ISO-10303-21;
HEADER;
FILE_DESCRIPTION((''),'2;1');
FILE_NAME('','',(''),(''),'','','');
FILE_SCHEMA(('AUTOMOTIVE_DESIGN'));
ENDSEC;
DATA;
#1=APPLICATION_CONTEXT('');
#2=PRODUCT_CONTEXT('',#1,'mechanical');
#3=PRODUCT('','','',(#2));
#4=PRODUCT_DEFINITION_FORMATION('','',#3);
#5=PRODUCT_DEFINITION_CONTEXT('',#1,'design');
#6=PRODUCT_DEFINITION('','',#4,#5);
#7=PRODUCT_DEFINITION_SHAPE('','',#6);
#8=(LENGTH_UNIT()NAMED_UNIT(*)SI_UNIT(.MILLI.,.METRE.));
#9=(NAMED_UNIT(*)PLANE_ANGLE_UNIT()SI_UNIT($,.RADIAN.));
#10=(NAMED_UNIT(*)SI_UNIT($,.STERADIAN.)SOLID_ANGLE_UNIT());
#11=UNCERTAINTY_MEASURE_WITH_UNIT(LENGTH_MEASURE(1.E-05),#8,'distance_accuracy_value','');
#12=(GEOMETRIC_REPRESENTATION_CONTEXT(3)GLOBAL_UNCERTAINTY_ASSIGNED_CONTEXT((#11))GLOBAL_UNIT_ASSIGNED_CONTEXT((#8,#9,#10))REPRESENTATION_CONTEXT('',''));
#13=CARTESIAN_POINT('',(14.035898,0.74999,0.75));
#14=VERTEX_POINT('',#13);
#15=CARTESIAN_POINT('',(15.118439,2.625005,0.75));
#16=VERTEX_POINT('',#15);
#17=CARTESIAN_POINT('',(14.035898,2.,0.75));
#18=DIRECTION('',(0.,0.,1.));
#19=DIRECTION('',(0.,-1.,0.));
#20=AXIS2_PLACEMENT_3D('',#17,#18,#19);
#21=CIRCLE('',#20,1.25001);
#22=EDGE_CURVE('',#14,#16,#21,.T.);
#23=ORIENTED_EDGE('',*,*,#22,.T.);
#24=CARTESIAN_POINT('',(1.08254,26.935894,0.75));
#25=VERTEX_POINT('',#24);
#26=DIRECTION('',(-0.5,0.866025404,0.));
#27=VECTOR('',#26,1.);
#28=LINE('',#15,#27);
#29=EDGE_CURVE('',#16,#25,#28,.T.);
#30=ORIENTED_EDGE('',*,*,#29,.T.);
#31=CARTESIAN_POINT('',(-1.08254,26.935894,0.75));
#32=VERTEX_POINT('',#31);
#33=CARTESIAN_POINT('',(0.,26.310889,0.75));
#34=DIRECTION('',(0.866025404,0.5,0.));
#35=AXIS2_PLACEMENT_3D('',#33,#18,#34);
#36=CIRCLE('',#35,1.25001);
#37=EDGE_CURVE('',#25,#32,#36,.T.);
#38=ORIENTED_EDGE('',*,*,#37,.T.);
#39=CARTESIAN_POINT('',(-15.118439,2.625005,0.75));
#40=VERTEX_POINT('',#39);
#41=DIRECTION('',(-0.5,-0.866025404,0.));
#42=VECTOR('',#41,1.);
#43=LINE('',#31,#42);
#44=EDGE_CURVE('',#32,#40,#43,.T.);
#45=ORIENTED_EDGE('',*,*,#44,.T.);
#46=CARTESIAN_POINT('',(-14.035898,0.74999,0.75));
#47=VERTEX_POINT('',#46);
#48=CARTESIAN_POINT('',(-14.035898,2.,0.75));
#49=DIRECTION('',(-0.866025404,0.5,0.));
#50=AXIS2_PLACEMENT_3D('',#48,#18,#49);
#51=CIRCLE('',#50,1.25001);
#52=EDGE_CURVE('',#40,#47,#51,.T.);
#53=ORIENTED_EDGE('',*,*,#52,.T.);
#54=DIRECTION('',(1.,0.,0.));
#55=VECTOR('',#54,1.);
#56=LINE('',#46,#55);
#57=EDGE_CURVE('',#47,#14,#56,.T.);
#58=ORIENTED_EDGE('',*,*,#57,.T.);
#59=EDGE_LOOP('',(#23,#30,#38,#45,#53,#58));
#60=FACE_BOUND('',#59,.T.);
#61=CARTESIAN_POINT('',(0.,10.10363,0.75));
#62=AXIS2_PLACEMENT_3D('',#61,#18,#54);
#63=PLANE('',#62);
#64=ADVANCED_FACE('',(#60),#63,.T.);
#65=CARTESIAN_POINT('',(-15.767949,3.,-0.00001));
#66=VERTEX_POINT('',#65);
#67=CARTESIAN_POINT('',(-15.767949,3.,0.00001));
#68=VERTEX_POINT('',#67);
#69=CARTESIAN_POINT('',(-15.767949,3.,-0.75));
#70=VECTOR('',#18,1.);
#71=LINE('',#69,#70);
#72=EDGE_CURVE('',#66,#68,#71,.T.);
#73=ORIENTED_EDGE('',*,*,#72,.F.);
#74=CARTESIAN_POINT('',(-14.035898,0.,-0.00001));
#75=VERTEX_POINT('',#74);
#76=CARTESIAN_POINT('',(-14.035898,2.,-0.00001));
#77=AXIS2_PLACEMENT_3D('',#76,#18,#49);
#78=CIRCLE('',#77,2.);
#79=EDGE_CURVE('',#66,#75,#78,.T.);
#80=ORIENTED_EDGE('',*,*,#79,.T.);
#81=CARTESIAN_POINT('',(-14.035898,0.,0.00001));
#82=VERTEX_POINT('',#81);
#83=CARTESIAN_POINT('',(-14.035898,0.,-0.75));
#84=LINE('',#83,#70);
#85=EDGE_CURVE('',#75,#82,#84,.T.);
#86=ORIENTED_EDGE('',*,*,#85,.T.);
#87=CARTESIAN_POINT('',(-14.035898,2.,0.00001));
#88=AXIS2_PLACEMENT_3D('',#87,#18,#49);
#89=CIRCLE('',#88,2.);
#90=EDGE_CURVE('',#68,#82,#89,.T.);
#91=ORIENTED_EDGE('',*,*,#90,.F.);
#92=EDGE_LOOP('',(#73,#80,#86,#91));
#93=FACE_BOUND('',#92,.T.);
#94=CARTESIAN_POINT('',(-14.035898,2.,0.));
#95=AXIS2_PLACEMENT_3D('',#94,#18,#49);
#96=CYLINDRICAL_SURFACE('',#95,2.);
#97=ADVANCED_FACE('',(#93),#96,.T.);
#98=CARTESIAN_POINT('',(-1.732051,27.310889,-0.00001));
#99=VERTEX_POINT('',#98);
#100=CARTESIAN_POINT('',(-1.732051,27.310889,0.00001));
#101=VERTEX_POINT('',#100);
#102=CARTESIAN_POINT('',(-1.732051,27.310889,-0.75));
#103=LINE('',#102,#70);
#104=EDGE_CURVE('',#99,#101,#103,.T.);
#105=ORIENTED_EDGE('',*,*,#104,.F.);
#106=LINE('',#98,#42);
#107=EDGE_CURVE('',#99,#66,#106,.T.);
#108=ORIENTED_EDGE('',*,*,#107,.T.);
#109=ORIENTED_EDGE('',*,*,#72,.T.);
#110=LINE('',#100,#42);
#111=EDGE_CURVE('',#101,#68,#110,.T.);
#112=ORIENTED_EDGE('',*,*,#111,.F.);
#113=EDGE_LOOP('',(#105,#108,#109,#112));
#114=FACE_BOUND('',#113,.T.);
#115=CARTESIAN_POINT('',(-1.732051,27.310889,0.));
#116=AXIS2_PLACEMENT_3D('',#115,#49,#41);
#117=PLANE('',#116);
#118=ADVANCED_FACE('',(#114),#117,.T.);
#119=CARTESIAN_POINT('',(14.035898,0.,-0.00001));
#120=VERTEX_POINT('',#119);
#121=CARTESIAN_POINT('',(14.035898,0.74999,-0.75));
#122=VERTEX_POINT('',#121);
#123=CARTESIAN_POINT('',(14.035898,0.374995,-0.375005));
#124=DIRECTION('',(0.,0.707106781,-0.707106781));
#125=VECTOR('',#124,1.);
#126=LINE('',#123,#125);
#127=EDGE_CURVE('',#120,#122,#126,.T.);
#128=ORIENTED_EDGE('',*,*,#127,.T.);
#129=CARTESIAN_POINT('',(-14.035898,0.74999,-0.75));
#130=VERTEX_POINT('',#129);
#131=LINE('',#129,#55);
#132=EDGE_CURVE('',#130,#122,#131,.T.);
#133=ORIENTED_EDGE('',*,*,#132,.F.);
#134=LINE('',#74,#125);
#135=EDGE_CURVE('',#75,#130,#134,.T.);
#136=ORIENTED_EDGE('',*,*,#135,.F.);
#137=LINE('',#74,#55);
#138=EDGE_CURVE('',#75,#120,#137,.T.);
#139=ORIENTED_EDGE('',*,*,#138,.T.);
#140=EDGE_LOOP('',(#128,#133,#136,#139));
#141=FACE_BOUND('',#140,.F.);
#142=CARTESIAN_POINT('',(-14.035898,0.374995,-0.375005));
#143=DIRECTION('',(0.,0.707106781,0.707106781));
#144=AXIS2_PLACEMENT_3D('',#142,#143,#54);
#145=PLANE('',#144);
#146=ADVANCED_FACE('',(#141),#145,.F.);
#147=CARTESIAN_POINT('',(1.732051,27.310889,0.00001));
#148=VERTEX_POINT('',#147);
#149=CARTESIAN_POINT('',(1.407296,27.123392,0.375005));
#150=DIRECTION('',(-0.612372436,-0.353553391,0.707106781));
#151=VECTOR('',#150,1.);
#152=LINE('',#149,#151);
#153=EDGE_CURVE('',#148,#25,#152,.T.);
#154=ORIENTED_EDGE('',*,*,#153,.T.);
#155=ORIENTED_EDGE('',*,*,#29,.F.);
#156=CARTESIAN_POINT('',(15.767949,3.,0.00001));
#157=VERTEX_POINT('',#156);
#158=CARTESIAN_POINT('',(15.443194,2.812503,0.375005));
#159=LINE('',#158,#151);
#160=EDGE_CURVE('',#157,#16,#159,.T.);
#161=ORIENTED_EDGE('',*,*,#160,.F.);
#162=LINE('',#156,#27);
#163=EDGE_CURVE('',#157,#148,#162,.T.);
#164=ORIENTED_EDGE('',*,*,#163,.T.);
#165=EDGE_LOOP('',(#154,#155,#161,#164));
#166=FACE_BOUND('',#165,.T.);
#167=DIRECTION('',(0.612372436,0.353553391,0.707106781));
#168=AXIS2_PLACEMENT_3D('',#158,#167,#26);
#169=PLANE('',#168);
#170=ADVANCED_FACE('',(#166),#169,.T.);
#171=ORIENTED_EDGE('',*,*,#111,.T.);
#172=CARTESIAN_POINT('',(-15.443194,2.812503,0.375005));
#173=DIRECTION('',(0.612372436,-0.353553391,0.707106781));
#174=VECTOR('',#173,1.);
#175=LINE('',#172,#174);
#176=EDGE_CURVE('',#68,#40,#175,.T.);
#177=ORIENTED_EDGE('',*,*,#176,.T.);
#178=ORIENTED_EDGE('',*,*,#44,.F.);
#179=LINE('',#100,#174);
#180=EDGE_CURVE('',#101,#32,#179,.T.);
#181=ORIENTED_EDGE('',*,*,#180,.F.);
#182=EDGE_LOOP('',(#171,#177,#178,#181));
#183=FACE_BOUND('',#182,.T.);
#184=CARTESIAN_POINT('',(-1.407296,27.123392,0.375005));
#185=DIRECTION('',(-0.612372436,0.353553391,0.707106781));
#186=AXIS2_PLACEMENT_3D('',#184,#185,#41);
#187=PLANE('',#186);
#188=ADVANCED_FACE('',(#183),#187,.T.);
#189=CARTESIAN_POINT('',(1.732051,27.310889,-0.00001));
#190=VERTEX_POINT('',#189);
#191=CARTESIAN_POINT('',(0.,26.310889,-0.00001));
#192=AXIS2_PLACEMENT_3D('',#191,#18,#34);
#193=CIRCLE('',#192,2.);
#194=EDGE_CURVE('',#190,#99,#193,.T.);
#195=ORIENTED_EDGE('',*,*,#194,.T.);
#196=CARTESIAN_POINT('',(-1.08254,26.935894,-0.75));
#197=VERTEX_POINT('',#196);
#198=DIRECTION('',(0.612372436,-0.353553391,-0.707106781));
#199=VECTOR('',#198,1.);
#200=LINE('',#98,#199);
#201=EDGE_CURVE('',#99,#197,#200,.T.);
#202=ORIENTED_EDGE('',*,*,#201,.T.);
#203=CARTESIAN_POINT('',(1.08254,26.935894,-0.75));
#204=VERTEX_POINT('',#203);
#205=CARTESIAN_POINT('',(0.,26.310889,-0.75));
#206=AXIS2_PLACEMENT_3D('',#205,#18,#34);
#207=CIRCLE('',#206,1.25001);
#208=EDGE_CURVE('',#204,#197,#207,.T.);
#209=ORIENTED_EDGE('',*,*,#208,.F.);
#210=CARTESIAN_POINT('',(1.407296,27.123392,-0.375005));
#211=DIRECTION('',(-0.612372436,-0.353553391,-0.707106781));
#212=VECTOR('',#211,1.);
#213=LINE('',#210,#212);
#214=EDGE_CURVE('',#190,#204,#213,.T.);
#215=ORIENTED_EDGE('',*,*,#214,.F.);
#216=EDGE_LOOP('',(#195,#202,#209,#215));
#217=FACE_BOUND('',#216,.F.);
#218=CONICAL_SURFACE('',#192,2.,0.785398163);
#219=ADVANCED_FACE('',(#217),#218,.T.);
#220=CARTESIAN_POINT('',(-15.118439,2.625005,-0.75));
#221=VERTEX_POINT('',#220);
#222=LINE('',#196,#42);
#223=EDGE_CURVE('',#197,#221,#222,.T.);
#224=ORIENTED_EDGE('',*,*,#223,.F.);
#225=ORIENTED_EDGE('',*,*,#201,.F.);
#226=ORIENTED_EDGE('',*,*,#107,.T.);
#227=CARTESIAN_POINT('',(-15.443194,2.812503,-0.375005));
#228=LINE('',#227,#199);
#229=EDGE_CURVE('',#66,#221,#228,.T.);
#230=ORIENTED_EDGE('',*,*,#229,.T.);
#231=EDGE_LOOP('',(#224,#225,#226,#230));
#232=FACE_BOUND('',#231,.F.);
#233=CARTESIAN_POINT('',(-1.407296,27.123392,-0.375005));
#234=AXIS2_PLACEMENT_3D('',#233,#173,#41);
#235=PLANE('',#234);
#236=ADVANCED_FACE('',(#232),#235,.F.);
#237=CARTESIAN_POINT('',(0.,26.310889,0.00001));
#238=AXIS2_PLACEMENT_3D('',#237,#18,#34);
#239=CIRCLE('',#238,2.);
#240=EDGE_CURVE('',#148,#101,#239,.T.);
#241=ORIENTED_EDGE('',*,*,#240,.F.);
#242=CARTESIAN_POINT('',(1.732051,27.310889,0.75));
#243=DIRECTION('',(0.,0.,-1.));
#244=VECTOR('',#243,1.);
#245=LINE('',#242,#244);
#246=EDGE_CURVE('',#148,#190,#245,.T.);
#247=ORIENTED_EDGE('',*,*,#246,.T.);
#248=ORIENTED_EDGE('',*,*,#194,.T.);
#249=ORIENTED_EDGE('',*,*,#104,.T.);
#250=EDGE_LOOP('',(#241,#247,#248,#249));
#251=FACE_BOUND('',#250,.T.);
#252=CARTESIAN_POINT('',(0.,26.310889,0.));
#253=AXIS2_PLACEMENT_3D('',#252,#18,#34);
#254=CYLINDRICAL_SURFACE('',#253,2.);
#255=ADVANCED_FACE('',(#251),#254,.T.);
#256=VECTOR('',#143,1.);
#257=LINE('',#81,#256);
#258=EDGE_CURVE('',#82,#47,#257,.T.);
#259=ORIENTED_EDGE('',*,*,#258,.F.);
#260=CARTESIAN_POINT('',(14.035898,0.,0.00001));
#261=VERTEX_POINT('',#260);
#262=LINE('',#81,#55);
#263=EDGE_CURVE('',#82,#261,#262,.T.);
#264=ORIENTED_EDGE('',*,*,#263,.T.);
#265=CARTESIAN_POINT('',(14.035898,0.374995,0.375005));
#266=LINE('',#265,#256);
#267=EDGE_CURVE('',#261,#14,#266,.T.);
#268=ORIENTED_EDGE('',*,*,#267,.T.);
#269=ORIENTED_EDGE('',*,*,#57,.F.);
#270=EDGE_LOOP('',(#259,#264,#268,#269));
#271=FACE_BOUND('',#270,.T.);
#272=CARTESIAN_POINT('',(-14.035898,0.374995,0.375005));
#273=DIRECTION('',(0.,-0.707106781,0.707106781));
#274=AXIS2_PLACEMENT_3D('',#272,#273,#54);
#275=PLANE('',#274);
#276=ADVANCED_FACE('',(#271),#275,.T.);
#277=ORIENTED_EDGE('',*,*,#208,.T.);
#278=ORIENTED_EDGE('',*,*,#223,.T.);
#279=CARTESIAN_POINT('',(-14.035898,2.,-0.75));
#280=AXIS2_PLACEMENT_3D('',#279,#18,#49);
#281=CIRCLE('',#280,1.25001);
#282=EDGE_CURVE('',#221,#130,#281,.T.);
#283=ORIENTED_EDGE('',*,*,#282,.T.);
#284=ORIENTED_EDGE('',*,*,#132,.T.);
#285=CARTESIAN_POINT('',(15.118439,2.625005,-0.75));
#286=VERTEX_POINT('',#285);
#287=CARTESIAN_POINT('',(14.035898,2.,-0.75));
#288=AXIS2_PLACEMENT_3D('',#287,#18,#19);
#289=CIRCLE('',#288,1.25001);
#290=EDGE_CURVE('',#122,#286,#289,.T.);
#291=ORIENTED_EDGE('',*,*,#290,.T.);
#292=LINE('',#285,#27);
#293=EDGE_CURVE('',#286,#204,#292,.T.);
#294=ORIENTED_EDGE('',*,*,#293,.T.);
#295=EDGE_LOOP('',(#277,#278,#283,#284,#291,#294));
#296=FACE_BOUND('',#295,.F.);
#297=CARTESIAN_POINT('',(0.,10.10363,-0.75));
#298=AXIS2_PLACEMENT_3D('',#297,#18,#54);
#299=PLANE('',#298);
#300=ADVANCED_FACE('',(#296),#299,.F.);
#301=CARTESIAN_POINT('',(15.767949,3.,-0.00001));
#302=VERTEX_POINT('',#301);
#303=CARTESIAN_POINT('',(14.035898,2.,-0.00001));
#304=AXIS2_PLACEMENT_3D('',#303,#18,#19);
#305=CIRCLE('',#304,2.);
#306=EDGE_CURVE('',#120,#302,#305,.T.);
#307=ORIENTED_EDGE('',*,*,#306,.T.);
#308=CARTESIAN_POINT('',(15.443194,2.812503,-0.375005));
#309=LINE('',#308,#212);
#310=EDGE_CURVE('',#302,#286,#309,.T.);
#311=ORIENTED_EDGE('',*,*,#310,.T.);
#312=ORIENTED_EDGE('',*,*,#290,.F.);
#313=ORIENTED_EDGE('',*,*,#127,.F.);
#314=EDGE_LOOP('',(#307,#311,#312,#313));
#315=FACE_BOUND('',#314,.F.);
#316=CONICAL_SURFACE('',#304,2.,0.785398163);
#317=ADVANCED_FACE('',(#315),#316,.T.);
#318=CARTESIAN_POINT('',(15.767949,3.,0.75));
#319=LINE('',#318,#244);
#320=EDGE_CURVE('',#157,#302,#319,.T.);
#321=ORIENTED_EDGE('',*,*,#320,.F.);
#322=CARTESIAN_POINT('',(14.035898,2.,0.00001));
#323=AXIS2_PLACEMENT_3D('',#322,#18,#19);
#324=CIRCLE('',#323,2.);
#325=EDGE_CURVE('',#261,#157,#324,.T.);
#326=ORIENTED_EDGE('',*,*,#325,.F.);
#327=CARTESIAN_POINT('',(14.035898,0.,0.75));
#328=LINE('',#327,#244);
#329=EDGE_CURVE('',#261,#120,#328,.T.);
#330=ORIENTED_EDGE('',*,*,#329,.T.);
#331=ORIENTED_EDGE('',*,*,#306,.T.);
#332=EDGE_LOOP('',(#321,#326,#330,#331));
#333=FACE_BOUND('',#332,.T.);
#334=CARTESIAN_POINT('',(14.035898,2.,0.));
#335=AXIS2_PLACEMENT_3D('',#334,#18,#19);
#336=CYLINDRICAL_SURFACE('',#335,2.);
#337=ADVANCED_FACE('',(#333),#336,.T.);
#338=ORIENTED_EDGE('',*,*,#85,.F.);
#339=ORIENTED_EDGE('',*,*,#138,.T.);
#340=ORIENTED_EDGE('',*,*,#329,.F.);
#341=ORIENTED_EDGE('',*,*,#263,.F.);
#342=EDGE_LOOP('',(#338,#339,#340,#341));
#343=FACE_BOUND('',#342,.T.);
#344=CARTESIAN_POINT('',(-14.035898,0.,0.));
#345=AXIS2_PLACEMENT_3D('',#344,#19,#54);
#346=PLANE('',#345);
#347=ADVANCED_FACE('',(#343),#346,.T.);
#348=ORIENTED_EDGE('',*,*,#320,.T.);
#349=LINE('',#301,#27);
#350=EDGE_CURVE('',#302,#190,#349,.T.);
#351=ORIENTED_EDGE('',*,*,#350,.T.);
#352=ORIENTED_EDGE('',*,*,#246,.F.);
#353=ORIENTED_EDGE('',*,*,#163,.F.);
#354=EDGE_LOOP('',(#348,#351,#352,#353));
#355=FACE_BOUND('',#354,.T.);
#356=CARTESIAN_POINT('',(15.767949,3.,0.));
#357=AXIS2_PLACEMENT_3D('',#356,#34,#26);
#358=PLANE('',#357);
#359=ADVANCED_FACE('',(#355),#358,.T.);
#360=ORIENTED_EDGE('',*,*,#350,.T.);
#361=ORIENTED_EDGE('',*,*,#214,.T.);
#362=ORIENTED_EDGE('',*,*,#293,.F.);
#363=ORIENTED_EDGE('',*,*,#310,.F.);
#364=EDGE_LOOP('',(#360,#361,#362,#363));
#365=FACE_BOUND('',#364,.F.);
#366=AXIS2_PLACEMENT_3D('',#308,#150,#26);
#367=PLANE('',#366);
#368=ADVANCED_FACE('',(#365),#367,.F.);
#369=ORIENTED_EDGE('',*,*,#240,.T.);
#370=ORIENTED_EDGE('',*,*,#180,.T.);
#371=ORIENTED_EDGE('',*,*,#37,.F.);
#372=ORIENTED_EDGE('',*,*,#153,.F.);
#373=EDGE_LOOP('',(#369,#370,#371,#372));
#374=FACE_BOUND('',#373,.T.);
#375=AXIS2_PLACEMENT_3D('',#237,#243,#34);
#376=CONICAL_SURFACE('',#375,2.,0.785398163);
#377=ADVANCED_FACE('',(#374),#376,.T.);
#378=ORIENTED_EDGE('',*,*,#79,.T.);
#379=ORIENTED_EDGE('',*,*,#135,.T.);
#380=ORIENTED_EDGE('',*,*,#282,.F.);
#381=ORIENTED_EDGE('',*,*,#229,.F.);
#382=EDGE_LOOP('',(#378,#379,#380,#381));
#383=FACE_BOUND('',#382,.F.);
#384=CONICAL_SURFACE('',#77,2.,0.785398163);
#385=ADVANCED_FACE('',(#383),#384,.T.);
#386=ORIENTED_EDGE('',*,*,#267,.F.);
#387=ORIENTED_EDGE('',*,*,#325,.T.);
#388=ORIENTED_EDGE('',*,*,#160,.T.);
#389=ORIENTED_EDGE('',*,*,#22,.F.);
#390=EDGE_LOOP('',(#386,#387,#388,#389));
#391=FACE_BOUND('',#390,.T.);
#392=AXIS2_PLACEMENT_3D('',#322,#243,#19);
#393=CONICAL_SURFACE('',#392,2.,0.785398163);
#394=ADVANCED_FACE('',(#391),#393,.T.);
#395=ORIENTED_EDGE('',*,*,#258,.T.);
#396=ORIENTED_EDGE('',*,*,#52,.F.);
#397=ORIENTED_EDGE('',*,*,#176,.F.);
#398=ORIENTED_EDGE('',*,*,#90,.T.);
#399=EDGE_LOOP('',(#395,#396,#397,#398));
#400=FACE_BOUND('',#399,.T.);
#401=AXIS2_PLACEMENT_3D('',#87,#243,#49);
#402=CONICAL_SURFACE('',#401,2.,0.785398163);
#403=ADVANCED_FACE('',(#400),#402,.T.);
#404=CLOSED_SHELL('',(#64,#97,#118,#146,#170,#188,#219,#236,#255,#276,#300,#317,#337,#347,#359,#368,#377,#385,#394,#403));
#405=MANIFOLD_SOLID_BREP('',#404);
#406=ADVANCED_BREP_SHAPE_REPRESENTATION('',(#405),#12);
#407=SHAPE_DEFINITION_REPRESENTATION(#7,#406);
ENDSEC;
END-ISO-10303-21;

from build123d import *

# Parameters (mm, degrees)
F1_DEPTH = 0.75
F2_SIZE  = 0.74999


# Not quite as in the source:
# - a fillet or chamfer is up to 0.001 mm smaller than in the source, because OpenCascade refuses the exact size


with BuildPart() as f1:
    # F0 (on Top) → F1 (new body, symmetric)
    with BuildSketch(Plane.XY):
        with BuildLine():
            ThreePointArc((1.7320508076, 27.3108891325), (0, 28.3108891325), (-1.7320508076, 27.3108891325))
            Line((-1.7320508076, 27.3108891325), (-15.7679491924, 3))
            ThreePointArc((-15.7679491924, 3), (-15.7679491924, 1), (-14.0358983849, 0))
            Line((-14.0358983849, 0), (14.0358983849, 0))
            ThreePointArc((14.0358983849, 0), (15.7679491924, 1), (15.7679491924, 3))
            Line((15.7679491924, 3), (1.7320508076, 27.3108891325))
        make_face()
    extrude(amount=F1_DEPTH, both=True)

    # F2 (size 0.75 in the source; OpenCascade refuses exactly that, so slightly less here)
    f2_edges = [f1.edges().sort_by_distance(p)[0] for p in [
        (8.75, 15.155445, 0.75),
        (8.75, 15.155445, -0.75),
        (0, 0, 0.75),
        (-8.75, 15.155445, 0.75),
        (0, 0, -0.75),
        (-8.75, 15.155445, -0.75),
    ]]
    chamfer(f2_edges, length=F2_SIZE)


solid = f1.part
